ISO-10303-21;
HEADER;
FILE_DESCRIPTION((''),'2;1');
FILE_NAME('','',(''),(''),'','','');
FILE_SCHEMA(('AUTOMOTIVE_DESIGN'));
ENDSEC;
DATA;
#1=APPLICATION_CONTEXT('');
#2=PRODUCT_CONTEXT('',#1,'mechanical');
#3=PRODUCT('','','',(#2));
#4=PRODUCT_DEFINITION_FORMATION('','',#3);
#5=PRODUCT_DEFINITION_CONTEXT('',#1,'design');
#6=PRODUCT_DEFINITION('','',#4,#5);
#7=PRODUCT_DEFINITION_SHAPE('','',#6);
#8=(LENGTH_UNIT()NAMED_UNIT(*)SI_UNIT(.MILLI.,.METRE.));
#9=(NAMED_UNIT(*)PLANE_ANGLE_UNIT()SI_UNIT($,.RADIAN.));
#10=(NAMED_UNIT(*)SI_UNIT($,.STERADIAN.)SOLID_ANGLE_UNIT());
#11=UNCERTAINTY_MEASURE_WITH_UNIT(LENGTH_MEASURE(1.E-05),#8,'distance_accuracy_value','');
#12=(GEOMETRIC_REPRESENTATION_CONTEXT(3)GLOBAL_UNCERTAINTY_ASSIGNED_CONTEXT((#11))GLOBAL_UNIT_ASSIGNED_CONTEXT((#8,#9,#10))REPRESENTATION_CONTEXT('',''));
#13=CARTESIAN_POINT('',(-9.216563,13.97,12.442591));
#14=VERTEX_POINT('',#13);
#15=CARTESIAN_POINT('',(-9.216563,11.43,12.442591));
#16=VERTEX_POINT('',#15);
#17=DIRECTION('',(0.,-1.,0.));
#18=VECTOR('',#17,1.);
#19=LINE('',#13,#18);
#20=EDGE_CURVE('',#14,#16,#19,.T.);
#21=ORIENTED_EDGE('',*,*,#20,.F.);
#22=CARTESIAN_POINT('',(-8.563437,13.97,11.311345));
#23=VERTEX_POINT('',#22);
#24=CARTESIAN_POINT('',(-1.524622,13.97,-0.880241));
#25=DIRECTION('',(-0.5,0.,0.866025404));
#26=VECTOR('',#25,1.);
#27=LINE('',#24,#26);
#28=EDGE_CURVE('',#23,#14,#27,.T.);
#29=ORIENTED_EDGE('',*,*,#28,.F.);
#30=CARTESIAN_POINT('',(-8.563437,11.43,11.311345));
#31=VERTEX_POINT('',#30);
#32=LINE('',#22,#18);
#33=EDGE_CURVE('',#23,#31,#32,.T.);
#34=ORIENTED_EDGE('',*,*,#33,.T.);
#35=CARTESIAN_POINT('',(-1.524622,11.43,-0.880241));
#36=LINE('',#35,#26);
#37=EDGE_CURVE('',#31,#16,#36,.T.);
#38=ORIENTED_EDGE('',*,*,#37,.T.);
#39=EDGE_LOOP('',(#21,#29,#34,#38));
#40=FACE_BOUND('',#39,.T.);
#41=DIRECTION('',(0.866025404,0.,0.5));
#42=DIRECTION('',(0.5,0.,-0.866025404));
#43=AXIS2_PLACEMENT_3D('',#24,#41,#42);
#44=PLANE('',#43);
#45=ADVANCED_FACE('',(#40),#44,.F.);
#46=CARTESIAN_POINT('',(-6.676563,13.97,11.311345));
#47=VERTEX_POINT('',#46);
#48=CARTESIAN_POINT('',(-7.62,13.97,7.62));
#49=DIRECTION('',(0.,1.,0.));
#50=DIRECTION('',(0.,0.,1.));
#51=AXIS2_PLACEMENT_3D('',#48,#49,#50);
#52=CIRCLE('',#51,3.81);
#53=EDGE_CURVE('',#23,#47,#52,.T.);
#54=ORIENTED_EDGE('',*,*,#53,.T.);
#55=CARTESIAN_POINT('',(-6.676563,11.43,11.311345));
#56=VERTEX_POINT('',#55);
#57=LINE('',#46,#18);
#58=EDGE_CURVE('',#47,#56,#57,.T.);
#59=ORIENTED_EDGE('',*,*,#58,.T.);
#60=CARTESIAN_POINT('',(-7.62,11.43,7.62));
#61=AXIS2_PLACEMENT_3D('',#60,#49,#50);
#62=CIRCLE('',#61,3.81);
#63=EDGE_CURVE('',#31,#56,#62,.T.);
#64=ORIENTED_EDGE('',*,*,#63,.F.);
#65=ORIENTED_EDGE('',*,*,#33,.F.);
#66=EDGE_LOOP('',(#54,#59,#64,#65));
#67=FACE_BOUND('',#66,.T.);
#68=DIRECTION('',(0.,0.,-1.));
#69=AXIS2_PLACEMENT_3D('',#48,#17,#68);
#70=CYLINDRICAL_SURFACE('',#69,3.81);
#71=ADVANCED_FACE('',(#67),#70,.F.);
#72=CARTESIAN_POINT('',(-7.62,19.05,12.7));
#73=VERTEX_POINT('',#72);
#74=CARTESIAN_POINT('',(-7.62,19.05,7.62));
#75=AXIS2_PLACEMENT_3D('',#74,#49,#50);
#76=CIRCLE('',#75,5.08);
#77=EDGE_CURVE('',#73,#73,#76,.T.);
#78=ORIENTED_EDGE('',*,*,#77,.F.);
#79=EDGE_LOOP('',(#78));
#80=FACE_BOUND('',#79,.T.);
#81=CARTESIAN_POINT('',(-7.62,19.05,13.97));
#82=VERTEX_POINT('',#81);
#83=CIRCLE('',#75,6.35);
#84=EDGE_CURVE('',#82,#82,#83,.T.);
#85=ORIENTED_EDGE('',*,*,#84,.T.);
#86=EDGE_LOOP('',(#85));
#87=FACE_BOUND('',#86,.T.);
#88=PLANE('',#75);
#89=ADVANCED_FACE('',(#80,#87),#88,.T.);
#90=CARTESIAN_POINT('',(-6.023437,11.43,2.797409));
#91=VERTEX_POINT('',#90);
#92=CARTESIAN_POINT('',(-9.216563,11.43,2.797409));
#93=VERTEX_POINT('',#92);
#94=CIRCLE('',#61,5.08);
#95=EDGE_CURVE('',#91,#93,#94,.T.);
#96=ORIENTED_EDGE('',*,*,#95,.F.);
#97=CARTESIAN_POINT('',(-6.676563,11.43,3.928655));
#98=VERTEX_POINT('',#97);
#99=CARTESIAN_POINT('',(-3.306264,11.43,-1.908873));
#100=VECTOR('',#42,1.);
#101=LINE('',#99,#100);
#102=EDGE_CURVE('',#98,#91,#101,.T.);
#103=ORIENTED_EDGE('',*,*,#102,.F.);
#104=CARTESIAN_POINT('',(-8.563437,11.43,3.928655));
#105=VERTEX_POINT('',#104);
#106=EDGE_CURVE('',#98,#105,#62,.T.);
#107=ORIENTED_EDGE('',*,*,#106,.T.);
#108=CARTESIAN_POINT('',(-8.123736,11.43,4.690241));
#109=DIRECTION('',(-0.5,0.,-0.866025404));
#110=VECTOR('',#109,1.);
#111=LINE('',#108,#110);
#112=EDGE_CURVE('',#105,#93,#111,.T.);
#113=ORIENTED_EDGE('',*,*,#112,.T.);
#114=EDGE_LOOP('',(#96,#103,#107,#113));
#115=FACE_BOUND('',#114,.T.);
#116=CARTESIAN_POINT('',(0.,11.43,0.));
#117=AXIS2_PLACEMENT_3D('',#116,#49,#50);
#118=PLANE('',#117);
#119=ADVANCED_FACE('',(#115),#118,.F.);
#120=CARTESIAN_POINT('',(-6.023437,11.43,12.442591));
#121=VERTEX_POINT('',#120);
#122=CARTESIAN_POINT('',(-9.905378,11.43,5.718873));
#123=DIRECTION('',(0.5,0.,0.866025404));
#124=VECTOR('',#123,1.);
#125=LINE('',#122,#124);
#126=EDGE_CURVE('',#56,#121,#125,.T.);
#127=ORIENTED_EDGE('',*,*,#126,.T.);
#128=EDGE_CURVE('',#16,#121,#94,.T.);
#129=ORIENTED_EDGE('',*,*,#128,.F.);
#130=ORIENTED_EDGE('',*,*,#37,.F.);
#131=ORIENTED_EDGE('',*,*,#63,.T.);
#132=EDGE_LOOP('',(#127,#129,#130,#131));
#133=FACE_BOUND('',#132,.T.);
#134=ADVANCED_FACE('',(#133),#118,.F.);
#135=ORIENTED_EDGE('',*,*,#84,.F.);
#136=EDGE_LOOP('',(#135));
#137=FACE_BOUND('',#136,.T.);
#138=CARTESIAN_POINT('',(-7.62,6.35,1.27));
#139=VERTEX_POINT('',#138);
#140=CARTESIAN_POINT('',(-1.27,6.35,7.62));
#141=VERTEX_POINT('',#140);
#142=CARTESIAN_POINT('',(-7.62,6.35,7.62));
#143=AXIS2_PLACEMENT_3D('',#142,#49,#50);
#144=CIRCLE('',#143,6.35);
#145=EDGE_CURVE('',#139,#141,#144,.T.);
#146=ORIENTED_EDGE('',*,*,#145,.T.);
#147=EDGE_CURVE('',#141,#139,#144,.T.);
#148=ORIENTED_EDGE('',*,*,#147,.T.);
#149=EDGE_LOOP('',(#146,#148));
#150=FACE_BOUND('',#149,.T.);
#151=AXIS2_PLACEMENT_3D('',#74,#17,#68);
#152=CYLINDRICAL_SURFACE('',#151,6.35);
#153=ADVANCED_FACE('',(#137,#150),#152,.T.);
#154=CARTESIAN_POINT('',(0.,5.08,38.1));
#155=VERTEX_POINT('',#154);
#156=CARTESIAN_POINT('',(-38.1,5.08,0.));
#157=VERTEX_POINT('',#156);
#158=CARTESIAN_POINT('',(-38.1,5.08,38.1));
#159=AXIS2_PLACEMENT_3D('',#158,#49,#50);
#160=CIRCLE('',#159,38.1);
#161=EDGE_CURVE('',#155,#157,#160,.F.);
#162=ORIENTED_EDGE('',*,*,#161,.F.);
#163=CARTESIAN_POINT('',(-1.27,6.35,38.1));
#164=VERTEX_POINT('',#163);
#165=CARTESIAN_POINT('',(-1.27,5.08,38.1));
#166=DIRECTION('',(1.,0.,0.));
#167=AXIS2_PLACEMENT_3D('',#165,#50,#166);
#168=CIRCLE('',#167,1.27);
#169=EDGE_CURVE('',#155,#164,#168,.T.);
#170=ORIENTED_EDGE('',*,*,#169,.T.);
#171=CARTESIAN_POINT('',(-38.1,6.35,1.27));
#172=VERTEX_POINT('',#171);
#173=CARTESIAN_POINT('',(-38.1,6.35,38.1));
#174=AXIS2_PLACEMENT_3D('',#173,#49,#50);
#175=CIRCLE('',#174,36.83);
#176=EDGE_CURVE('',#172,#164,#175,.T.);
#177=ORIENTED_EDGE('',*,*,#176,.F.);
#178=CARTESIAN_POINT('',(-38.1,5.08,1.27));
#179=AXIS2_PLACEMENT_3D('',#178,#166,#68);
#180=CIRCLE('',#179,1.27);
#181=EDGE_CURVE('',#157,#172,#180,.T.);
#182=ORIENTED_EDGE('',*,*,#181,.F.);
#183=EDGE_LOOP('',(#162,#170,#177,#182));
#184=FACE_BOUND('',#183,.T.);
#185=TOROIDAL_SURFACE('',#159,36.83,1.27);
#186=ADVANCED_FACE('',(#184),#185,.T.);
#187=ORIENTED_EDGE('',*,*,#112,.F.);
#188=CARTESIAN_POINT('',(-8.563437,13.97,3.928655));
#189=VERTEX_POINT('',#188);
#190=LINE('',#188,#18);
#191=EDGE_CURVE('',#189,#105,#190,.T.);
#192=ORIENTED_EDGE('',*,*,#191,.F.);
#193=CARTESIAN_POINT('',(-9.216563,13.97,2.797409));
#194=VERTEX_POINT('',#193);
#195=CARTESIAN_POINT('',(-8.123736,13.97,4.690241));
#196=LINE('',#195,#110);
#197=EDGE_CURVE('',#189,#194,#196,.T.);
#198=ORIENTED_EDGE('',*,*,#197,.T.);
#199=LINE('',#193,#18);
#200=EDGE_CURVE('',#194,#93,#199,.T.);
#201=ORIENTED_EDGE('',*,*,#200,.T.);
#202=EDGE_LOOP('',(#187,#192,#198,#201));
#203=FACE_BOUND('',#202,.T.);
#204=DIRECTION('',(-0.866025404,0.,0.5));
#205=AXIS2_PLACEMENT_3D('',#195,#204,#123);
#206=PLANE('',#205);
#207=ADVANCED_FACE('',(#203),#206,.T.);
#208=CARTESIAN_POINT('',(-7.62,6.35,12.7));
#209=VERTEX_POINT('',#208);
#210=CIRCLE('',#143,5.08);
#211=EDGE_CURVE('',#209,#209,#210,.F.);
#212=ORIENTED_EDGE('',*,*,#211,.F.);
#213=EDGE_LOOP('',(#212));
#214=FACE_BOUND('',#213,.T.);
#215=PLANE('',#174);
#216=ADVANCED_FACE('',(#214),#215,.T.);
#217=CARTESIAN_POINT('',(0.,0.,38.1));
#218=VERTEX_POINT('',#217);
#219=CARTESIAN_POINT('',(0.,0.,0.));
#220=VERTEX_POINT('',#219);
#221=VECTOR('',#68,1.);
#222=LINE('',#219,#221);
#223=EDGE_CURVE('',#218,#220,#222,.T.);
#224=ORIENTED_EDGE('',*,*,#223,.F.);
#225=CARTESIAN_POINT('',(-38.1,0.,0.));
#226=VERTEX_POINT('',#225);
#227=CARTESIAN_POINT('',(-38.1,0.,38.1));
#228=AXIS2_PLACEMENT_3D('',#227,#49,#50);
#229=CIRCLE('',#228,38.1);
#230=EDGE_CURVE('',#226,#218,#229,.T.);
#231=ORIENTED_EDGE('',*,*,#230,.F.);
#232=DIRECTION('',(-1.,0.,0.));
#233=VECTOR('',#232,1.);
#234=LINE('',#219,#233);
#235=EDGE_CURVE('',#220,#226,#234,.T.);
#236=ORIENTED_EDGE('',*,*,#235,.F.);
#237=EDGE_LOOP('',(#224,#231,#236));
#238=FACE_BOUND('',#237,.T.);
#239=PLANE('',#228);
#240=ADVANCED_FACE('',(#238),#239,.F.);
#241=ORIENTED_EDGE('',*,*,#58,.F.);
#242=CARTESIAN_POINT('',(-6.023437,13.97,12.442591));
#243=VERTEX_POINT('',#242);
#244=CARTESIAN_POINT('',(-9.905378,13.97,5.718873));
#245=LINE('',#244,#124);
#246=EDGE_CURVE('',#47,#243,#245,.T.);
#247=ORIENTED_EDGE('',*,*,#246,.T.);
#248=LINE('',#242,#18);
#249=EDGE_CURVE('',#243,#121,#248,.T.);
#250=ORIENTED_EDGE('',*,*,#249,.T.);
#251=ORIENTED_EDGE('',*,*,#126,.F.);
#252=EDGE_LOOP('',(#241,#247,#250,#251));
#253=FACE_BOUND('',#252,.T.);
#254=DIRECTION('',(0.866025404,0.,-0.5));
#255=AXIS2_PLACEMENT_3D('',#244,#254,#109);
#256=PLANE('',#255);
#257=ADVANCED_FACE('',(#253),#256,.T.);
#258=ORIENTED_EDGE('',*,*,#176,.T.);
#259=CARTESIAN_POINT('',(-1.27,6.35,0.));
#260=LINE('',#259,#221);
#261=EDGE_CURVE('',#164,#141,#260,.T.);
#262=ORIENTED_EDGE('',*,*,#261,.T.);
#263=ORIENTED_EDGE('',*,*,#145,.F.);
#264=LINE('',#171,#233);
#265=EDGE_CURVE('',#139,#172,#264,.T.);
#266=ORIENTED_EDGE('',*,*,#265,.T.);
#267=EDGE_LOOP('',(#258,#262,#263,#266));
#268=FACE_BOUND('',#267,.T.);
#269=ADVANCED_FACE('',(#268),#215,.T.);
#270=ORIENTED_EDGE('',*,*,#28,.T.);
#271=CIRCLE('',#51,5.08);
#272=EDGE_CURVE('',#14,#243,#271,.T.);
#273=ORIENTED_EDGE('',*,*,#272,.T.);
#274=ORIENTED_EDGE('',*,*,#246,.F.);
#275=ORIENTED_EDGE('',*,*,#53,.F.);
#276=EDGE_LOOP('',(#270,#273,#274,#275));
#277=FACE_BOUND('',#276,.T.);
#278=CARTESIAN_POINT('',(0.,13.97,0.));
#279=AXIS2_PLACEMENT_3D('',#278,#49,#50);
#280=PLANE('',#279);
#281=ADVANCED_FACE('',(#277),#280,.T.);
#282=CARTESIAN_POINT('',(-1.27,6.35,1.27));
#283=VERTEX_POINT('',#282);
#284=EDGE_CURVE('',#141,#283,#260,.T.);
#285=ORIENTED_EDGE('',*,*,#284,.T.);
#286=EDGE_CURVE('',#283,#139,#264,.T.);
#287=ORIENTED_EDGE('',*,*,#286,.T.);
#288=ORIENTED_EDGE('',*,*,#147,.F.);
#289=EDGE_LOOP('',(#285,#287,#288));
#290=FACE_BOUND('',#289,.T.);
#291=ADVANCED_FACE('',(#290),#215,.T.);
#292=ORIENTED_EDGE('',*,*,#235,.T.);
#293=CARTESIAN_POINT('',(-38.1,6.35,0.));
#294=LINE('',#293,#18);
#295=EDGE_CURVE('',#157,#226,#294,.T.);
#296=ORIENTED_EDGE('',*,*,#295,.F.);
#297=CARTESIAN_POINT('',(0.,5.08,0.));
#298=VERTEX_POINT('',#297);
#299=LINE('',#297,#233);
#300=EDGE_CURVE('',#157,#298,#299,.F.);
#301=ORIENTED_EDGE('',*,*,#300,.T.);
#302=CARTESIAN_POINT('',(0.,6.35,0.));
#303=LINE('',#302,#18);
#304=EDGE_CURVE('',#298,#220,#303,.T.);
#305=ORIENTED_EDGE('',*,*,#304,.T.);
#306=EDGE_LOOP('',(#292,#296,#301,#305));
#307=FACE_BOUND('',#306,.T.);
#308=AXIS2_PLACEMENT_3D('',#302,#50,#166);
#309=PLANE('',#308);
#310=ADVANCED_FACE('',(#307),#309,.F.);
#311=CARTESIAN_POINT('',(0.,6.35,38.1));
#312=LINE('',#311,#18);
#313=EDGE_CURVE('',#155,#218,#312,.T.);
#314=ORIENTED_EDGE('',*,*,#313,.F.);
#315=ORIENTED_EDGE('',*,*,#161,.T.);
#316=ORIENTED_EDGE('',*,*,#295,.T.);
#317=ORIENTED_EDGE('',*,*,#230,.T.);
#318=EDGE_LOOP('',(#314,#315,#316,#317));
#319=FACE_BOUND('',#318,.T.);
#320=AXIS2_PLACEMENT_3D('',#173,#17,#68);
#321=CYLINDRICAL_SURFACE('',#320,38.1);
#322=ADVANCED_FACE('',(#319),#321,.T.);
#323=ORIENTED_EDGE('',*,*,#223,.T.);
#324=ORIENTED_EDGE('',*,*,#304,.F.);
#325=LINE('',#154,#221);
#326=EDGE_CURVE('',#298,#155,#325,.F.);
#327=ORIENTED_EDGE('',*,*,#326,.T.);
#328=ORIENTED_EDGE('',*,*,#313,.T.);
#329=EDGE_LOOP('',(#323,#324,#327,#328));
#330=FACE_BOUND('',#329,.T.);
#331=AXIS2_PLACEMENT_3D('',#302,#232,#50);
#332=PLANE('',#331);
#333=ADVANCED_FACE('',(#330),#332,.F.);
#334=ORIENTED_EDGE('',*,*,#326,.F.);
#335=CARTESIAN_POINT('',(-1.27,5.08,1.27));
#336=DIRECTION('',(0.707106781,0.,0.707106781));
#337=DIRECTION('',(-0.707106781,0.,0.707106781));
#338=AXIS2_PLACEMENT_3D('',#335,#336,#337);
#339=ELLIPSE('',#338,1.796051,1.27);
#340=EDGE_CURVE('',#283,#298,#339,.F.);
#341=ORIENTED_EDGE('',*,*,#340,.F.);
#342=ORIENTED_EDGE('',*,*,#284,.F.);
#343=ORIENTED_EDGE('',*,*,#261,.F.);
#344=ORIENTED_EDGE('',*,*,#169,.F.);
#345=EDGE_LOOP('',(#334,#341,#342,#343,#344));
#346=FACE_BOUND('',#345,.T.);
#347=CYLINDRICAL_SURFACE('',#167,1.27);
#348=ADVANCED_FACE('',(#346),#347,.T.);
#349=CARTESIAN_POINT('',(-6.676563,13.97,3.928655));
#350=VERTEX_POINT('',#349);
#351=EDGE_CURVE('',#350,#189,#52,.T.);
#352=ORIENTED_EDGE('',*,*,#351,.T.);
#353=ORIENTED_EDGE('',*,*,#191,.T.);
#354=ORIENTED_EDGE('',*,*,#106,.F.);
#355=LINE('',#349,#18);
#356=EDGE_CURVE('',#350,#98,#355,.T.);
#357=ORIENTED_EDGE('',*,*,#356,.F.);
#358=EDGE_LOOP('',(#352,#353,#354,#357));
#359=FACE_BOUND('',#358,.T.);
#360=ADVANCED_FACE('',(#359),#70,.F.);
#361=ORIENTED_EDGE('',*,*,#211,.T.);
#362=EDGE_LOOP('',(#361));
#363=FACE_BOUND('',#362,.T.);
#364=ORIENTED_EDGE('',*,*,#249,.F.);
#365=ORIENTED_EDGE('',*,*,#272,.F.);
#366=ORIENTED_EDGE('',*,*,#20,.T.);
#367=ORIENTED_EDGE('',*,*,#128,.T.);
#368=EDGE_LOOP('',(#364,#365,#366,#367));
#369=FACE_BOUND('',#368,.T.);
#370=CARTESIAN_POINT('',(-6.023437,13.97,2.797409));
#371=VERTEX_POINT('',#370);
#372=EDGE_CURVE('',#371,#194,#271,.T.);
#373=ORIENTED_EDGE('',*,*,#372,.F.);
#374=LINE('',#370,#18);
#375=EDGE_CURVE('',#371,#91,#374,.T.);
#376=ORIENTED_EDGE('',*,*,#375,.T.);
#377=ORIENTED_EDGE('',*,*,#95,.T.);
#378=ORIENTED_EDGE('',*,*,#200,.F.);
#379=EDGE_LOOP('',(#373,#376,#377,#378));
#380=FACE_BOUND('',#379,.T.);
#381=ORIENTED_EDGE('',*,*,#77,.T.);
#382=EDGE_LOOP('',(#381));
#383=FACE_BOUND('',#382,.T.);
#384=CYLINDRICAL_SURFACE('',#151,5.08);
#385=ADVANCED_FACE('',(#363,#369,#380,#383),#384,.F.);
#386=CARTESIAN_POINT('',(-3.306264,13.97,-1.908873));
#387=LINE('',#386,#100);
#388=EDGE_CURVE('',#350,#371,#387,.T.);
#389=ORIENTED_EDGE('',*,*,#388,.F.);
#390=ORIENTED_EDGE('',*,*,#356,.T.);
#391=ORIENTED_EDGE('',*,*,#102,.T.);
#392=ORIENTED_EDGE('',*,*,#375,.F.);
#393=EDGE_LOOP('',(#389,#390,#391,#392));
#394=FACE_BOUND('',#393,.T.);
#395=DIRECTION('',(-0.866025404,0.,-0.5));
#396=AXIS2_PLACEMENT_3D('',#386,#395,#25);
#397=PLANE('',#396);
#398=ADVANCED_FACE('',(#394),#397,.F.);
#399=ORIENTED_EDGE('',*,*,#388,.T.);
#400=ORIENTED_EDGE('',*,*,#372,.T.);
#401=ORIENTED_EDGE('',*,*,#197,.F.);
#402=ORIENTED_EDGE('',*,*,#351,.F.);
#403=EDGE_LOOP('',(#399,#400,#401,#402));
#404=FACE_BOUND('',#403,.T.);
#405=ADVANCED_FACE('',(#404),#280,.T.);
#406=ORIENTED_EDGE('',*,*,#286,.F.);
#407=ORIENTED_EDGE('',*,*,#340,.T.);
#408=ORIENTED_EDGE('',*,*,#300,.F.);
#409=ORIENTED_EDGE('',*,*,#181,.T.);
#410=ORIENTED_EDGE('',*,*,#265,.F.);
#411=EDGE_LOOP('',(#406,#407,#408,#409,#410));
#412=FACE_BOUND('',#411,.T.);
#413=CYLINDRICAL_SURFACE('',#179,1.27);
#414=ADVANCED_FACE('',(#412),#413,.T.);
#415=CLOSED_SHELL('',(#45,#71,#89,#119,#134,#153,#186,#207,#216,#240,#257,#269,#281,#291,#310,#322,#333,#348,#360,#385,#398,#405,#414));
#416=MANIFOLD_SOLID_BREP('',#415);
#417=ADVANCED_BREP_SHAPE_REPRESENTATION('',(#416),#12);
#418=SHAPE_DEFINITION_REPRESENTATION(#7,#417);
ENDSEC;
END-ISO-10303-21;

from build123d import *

# Parameters (mm, degrees)
BOSS_EXTRUDE1_DEPTH = 6.35
SKETCH2_R           = 6.35
SKETCH2_R_2         = 5.08
BOSS_EXTRUDE2_DEPTH = 12.7
BOSS_EXTRUDE3_START = 5.08
BOSS_EXTRUDE3_DEPTH = 2.54
FILLET1_R           = 1.27


with BuildPart() as part:
    # Sketch1 → Boss-Extrude1 (new body)
    with BuildSketch(Plane(origin=(0, 0, 0), x_dir=(1, 0, 0), z_dir=(0, 1, 0))):
        with BuildLine():
            Line((0, 0), (-38.1, 0))
            ThreePointArc((-38.1, 0), (-65.040768363, -65.040768363), (0, -38.1))
            Line((0, -38.1), (0, 0))
        make_face()
    extrude(amount=BOSS_EXTRUDE1_DEPTH)

    # Sketch2 → Boss-Extrude2 (add)
    with BuildSketch(Plane(origin=(0, 6.35, 0), x_dir=(1, 0, 0), z_dir=(0, 1, 0))):
        with Locations(Location((-7.62, -7.62, 0), (0, 0, 270))):
            Circle(SKETCH2_R)
        with Locations(Location((-7.62, -7.62, 0), (0, 0, 270))):
            Circle(SKETCH2_R_2, mode=Mode.SUBTRACT)
    extrude(amount=BOSS_EXTRUDE2_DEPTH)

    # Sketch3 → Boss-Extrude3 (add)
    with BuildSketch(Plane(origin=(0, 6.35, 0), x_dir=(1, 0, 0), z_dir=(0, 1, 0)).offset(BOSS_EXTRUDE3_START)):
        with BuildLine():
            Line((-9.216562761, -2.797408648), (-8.563437239, -3.928655235))
            ThreePointArc((-8.563437239, -3.928655235), (-7.62, -3.81), (-6.676562761, -3.928655235))
            Line((-6.676562761, -3.928655235), (-6.023437239, -2.797408648))
            ThreePointArc((-6.023437239, -2.797408648), (-7.62, -2.54), (-9.216562761, -2.797408648))
        make_face()
        with BuildLine():
            ThreePointArc((-6.676562761, -11.311344765), (-7.62, -11.43), (-8.563437239, -11.311344765))
            Line((-8.563437239, -11.311344765), (-9.216562761, -12.442591352))
            ThreePointArc((-9.216562761, -12.442591352), (-7.62, -12.7), (-6.023437239, -12.442591352))
            Line((-6.023437239, -12.442591352), (-6.676562761, -11.311344765))
        make_face()
    extrude(amount=BOSS_EXTRUDE3_DEPTH)

    # Fillet1
    fillet1_edges = [part.edges().sort_by_distance(p)[0] for p in [
        (-65.040768363, 6.35, 65.040768363),
        (0, 6.35, 19.05),
        (-19.05, 6.35, 0),
    ]]
    fillet(fillet1_edges, radius=FILLET1_R - 0.0001)  # a hair under: the kernel refuses the full size


solid = part.part
